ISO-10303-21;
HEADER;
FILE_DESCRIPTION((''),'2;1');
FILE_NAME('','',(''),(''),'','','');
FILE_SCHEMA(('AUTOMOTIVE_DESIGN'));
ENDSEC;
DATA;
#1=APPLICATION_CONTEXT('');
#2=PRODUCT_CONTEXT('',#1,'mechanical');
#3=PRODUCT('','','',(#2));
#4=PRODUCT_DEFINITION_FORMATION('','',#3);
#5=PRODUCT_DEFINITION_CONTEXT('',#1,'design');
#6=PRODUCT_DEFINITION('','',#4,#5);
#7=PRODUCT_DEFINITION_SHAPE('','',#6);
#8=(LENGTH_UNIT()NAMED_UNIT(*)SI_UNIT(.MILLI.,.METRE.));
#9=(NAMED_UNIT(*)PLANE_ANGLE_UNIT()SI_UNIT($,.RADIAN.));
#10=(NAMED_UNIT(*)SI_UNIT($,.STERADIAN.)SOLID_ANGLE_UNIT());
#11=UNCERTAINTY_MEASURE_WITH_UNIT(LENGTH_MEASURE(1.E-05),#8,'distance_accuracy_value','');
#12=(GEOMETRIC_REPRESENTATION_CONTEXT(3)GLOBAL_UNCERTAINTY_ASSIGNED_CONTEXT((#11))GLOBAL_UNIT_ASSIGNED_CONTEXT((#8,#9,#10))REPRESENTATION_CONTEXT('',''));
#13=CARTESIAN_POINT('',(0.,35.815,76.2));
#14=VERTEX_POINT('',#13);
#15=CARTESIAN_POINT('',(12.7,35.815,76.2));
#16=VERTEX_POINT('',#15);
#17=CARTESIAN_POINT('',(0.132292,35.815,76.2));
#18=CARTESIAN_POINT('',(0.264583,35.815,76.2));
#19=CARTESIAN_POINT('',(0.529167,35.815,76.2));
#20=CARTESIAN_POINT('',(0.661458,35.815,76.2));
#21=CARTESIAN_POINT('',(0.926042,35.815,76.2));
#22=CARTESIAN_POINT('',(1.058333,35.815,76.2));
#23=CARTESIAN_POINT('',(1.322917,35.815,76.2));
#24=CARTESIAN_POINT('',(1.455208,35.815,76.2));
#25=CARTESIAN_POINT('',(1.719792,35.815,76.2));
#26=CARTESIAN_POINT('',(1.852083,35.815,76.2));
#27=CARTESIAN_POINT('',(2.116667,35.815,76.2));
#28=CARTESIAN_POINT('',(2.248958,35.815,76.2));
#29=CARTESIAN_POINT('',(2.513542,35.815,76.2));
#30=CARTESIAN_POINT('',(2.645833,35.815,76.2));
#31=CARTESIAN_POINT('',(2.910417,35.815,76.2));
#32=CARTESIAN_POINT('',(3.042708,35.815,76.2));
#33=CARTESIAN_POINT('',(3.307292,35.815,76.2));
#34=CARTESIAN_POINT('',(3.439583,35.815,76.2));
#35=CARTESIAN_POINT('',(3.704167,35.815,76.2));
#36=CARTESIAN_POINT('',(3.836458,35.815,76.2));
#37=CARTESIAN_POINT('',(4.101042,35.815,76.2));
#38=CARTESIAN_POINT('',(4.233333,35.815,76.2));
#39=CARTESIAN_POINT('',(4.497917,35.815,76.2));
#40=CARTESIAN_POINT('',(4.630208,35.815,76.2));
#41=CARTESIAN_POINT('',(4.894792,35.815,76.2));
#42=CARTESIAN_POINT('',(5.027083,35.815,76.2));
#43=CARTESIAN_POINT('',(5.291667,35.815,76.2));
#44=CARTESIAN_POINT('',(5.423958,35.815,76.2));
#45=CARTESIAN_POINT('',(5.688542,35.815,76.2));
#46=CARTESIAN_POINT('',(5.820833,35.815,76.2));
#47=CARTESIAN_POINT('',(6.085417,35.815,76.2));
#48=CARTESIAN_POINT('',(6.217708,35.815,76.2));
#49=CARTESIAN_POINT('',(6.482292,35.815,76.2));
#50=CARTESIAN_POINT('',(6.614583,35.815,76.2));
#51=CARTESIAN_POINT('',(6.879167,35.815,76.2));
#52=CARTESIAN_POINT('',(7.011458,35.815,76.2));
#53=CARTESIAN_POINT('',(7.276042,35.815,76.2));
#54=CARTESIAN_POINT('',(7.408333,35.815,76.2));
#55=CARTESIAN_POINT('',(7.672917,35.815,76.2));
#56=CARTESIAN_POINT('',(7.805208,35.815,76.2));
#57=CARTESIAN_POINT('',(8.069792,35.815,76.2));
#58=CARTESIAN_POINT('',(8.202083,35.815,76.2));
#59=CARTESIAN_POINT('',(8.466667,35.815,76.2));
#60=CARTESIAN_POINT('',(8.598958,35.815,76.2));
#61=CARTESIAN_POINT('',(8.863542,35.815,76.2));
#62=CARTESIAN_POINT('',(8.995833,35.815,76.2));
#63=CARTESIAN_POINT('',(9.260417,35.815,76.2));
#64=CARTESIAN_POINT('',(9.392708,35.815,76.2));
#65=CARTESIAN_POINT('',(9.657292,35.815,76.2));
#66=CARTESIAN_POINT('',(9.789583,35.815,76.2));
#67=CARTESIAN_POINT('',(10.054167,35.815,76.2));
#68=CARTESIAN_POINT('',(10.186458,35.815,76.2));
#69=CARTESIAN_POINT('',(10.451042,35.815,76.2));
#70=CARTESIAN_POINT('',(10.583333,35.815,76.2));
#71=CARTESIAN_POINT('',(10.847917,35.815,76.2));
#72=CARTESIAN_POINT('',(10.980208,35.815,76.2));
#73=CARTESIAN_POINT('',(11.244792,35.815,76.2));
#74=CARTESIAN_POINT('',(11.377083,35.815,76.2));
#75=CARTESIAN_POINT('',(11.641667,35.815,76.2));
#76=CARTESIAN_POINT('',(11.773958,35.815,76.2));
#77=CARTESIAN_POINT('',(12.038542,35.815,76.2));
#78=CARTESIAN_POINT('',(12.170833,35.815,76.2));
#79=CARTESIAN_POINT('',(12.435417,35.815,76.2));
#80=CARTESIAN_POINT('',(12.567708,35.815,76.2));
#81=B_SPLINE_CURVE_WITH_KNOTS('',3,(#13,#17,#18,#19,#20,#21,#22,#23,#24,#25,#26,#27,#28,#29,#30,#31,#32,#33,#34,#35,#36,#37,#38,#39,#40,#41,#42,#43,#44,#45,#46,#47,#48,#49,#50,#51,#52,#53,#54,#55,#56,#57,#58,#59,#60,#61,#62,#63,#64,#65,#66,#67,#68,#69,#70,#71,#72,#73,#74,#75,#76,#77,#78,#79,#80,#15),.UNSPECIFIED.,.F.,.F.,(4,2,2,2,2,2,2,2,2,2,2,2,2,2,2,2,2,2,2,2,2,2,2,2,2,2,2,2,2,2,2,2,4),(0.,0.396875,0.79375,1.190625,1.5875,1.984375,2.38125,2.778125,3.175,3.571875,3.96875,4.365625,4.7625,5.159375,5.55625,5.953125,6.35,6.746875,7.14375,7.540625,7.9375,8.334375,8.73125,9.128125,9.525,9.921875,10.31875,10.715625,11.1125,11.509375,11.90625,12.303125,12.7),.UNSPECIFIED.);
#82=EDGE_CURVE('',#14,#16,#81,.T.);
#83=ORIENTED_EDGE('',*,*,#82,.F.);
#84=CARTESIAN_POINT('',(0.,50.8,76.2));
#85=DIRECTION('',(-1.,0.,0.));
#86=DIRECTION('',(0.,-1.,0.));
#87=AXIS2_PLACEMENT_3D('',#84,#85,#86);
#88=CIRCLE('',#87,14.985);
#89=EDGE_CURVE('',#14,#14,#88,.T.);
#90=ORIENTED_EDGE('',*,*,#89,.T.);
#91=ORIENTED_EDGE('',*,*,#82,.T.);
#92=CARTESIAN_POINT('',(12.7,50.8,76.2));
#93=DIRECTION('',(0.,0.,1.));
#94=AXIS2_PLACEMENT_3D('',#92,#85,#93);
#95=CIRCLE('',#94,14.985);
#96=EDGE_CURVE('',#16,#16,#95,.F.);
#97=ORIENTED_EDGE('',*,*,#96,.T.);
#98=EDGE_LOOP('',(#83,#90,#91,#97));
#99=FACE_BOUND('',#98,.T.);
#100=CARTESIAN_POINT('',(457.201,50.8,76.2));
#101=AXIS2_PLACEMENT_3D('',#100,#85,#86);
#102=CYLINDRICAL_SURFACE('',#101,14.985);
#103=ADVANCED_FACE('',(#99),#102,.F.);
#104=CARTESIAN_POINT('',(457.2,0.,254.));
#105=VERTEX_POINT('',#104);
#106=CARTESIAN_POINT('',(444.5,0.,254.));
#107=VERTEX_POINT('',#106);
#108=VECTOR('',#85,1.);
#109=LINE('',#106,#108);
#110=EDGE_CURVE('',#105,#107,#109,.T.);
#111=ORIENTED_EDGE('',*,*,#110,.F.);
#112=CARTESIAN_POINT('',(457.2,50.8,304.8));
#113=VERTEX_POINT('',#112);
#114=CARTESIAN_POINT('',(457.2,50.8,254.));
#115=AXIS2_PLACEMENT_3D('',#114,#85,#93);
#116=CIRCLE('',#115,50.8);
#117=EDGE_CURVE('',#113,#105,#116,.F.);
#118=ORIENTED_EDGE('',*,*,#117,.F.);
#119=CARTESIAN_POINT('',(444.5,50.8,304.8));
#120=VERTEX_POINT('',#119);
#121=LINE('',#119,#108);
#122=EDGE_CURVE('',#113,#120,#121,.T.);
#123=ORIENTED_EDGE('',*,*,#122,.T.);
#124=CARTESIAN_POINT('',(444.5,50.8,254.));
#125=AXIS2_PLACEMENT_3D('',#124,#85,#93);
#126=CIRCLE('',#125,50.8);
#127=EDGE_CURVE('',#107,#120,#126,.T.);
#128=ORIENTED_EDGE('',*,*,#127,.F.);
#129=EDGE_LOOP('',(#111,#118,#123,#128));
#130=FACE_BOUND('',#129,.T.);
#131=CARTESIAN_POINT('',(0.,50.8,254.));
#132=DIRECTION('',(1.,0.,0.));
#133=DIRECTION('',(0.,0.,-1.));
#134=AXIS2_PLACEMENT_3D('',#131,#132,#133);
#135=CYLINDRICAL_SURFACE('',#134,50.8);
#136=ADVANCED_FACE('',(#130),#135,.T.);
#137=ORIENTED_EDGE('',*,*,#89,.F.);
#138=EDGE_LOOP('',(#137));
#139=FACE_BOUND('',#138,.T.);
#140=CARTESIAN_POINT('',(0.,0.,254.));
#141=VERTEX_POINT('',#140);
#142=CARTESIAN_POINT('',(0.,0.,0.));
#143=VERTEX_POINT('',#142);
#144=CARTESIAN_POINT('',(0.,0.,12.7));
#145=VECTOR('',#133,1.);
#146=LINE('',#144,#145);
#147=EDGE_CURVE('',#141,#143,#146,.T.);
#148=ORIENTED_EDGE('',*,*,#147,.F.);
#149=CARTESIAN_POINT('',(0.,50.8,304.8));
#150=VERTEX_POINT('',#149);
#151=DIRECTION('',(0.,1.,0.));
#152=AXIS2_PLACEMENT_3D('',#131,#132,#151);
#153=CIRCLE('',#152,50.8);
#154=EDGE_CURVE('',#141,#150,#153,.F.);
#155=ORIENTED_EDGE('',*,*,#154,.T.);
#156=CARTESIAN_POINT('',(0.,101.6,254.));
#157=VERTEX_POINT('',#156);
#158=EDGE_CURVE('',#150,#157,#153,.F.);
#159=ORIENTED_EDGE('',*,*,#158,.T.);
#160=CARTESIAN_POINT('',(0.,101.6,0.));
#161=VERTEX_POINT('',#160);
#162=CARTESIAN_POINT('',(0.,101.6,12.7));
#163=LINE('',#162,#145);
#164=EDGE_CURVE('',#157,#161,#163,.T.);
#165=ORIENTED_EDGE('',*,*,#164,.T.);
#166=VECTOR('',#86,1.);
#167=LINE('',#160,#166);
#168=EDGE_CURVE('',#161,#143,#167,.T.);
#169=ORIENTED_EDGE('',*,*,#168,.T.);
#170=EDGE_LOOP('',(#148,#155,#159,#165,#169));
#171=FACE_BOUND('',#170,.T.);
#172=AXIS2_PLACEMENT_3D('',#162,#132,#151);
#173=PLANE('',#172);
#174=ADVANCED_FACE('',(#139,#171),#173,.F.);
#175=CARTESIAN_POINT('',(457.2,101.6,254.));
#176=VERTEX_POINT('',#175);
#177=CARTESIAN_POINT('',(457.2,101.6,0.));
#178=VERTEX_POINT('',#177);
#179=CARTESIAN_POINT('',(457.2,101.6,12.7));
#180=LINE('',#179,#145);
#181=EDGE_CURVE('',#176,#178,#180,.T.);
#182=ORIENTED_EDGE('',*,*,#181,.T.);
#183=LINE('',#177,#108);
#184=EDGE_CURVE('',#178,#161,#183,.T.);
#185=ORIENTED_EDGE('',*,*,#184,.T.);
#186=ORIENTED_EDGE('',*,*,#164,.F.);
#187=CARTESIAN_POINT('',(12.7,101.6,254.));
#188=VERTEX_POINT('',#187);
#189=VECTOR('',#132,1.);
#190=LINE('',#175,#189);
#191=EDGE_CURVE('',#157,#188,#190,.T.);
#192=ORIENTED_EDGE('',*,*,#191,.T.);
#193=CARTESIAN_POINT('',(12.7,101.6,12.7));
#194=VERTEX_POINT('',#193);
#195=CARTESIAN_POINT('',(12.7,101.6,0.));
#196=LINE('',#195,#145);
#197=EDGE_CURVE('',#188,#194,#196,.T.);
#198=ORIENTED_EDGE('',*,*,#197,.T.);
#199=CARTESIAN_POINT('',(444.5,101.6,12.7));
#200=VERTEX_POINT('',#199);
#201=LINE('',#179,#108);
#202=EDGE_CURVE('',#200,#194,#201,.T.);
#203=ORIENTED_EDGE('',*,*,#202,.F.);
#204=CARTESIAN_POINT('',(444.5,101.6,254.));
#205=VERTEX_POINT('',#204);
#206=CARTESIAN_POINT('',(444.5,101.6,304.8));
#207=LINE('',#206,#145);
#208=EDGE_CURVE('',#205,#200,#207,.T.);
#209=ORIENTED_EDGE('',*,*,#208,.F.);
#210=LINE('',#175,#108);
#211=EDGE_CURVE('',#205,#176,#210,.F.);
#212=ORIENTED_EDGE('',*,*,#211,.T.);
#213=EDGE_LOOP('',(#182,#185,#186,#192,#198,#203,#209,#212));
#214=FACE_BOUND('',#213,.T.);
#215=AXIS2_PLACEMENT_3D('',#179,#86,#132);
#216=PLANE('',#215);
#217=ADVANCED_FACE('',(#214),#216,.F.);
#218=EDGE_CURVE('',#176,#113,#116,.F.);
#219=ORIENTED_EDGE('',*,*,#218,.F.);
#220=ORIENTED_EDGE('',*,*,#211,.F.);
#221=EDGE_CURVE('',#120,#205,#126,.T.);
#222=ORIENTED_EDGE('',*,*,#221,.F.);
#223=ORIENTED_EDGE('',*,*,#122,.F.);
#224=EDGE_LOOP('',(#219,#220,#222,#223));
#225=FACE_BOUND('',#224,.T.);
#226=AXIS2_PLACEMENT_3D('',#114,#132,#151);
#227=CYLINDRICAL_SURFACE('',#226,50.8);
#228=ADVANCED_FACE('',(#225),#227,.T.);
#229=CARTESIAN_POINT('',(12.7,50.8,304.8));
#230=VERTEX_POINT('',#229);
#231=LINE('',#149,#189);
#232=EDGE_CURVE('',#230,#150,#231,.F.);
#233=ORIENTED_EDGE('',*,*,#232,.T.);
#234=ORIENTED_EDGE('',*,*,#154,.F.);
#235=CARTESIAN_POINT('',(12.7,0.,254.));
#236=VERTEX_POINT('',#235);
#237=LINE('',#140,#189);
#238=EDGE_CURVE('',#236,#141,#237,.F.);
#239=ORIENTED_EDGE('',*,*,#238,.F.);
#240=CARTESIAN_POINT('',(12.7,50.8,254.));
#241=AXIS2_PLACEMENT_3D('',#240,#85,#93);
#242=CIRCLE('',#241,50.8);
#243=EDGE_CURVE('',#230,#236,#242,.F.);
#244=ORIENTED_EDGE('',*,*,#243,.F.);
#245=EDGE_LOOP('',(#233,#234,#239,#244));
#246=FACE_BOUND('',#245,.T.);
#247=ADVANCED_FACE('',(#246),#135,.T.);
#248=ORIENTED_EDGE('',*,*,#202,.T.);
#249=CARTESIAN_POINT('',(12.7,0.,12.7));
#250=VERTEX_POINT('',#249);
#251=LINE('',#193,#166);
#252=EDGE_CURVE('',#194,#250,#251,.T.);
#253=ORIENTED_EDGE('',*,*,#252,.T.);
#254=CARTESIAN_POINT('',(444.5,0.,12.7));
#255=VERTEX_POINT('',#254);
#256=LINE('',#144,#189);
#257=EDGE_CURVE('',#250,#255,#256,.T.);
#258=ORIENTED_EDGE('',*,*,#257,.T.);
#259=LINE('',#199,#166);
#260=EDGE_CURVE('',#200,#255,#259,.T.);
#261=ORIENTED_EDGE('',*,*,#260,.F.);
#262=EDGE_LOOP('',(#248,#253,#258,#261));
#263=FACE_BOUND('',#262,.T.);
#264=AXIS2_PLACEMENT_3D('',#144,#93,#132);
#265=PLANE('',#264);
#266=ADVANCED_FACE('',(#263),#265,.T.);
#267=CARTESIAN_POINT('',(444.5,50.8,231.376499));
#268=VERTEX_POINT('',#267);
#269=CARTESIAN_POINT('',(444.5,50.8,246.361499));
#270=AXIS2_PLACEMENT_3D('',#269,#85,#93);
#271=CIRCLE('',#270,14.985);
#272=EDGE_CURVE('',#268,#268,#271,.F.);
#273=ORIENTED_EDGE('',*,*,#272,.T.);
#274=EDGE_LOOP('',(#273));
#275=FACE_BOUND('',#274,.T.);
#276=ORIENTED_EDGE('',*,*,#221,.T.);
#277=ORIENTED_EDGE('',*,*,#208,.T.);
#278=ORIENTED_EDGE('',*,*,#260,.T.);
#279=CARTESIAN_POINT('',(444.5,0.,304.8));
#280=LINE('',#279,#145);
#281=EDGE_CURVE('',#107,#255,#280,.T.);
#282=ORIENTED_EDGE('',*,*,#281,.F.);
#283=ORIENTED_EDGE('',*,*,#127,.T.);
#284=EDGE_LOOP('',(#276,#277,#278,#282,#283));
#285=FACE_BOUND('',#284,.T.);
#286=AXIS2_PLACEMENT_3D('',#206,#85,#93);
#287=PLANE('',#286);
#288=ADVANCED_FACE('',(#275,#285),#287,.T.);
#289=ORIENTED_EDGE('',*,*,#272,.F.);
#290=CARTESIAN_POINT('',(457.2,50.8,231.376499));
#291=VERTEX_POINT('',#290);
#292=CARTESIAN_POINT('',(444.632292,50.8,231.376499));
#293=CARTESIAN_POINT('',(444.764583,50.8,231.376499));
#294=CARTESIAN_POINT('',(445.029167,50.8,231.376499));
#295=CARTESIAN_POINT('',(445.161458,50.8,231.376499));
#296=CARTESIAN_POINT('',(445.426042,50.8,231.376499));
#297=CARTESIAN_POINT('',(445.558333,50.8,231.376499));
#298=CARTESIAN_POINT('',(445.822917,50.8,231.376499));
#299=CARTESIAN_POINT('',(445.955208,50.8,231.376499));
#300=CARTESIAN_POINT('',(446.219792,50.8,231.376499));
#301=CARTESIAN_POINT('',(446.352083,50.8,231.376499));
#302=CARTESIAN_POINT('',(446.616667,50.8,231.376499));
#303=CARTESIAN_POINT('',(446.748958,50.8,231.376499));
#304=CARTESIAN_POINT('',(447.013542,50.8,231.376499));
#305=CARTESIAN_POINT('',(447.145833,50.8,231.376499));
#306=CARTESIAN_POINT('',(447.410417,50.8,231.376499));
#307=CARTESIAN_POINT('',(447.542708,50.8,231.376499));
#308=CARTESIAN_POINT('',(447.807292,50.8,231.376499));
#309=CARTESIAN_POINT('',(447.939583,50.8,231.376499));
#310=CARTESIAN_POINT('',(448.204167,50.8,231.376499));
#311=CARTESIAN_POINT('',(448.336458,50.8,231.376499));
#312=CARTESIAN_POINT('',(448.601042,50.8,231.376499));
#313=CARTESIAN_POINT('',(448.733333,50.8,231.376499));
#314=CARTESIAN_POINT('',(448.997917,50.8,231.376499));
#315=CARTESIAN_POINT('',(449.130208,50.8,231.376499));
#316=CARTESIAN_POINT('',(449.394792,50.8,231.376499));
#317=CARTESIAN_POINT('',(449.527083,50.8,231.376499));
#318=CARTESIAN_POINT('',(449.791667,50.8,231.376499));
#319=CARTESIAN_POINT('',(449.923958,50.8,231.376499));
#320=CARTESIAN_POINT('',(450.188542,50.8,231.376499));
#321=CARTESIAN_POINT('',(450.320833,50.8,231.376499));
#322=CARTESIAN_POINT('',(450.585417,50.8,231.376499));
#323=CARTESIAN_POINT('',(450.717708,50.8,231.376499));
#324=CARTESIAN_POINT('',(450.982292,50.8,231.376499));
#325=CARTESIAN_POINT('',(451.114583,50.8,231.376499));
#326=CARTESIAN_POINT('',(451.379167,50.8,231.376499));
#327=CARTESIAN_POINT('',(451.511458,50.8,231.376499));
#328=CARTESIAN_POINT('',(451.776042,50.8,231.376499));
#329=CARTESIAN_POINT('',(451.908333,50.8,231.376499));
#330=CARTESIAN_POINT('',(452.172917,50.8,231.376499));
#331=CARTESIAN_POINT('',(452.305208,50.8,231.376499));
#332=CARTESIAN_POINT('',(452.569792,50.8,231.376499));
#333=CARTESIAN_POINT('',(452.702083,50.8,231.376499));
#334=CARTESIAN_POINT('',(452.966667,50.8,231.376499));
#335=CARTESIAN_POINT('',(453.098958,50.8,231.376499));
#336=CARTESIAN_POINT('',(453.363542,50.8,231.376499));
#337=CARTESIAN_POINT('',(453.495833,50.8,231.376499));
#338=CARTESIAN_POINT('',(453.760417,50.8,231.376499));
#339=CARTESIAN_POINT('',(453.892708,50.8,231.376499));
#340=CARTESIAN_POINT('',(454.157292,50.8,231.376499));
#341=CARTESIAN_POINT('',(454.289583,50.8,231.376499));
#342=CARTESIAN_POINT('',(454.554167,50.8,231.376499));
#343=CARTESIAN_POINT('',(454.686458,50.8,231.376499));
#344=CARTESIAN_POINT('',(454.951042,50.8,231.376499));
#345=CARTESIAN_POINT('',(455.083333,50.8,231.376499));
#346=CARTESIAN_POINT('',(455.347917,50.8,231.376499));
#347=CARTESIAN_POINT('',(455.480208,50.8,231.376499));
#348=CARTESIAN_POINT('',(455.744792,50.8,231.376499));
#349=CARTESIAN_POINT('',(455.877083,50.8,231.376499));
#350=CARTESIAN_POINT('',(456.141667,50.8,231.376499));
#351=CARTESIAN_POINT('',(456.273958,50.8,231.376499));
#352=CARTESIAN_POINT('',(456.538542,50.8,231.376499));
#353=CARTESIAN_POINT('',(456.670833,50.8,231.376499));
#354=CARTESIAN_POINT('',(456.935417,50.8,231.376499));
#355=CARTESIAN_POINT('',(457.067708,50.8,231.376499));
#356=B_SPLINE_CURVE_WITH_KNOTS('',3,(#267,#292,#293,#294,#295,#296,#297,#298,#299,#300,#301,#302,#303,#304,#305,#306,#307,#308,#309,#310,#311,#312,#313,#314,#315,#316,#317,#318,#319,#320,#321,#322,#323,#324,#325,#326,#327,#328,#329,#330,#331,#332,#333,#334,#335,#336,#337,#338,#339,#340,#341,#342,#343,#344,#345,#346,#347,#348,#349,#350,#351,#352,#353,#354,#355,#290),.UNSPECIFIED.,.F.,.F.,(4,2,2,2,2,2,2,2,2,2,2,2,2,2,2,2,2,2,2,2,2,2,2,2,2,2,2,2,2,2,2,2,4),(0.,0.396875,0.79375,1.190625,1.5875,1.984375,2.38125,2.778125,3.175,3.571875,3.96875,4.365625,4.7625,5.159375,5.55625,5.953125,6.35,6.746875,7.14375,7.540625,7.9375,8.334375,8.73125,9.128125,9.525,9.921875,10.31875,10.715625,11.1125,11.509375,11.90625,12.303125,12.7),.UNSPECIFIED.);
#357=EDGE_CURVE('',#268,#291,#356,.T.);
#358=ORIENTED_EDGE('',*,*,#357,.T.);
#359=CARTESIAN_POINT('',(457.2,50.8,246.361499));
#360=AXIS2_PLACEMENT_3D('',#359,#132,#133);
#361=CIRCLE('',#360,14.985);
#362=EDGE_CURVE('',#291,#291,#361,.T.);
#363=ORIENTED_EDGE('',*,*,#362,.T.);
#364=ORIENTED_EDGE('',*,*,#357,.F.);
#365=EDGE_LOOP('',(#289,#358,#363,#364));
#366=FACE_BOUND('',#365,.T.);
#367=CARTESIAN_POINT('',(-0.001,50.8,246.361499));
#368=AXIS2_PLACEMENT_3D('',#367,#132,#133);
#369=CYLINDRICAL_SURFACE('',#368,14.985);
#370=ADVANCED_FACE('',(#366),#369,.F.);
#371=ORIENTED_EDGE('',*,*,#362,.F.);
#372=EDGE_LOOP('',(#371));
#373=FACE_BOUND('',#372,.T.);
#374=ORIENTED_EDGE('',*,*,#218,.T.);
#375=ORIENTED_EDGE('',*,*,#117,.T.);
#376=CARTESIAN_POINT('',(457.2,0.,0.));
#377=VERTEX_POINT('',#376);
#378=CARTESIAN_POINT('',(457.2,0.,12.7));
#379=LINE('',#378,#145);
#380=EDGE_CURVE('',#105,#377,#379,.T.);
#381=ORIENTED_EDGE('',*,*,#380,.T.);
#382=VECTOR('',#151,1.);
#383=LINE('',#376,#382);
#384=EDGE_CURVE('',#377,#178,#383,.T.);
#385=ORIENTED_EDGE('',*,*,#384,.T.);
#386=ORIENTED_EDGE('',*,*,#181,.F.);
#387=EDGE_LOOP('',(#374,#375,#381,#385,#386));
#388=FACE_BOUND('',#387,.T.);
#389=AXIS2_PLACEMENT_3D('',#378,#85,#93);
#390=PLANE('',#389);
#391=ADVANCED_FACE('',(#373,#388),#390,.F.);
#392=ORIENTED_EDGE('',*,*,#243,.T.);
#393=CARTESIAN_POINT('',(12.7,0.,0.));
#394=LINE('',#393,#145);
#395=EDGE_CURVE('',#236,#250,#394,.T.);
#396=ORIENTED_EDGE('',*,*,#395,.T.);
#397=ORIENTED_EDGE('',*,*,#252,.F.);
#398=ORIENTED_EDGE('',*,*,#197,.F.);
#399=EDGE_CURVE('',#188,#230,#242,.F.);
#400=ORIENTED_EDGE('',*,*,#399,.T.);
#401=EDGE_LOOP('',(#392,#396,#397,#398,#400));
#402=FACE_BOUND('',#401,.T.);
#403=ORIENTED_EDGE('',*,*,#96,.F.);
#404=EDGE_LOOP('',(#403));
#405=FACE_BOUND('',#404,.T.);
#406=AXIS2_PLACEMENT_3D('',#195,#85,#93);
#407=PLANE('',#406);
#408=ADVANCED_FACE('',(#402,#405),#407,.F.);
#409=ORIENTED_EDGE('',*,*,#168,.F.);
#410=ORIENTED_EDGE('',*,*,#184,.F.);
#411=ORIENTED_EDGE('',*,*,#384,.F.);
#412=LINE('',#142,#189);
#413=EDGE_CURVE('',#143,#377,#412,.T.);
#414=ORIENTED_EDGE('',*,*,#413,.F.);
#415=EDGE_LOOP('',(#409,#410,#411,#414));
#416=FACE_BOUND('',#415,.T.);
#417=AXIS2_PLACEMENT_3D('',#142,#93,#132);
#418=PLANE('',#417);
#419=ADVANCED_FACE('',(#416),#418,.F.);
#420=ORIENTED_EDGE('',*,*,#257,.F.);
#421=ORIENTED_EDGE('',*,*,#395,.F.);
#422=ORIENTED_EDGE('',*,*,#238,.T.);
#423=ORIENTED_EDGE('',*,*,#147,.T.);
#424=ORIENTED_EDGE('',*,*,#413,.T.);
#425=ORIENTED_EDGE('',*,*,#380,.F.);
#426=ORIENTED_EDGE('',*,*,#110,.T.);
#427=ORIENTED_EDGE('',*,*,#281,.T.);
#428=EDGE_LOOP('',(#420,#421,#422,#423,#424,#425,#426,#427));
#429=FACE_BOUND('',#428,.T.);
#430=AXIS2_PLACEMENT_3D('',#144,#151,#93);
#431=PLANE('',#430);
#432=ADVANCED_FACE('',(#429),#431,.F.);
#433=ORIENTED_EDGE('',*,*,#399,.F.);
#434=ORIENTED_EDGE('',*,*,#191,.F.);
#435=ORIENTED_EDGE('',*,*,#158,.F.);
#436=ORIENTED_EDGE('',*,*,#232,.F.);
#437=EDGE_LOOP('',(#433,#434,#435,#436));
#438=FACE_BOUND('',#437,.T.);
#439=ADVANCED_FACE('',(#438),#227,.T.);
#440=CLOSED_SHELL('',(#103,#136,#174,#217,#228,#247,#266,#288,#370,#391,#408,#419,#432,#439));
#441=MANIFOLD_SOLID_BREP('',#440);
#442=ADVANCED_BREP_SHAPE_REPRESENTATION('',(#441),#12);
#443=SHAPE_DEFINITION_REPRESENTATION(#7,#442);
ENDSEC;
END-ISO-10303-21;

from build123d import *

# Parameters (mm, degrees)
SKETCH1_W           = 457.2
SKETCH1_H           = 101.6
BASE_FLANGE1_DEPTH  = 12.7
SKETCH6_W           = 12.7
SKETCH6_H           = 292.1
BOSS_EXTRUDE1_DEPTH = 101.6
SKETCH9_W           = 12.7
SKETCH9_H           = 292.1
BOSS_EXTRUDE2_DEPTH = 101.6
CUT_EXTRUDE1_REACH  = 560.8
SKETCH12_R          = 14.985
FILLET1_R           = 50.8
FILLET2_R           = 50.8
CUT_EXTRUDE2_REACH  = 560.8
SKETCH13_R          = 14.985


# Sheet-metal steps are written as plain solids
with BuildPart() as part:
    # Sketch1 → Base-Flange1 (new body)
    with BuildSketch(Plane.XY):
        with Locations((228.6, 50.8)):
            Rectangle(SKETCH1_W, SKETCH1_H)
    extrude(amount=BASE_FLANGE1_DEPTH)

    # Sketch6 → Boss-Extrude1 (add, through all)
    with BuildSketch(Plane.XZ):
        with Locations((6.35, 158.75)):
            Rectangle(SKETCH6_W, SKETCH6_H)
    extrude(amount=-BOSS_EXTRUDE1_DEPTH)

    # Sketch9 → Boss-Extrude2 (add, through all)
    with BuildSketch(Plane.XZ):
        with Locations((450.85, 158.75)):
            Rectangle(SKETCH9_W, SKETCH9_H)
    extrude(amount=-BOSS_EXTRUDE2_DEPTH)

    # Sketch12 → Cut-Extrude1 (cut, up to next)
    with BuildSketch(Plane(origin=(457.2, 0, 0), x_dir=(0, 0, -1), z_dir=(1, 0, 0)), mode=Mode.PRIVATE) as cut_extrude1_sk1:
        with Locations((-246.361498901, 50.8)):
            Circle(SKETCH12_R)
    cut_extrude1_tool1 = extrude(cut_extrude1_sk1.sketch, amount=-CUT_EXTRUDE1_REACH, mode=Mode.PRIVATE) & part.part
    add(cut_extrude1_tool1.solids().sort_by_distance((457.2, 50.8, 246.361499))[0], mode=Mode.SUBTRACT)

    # Fillet1
    fillet1_edges = [part.edges().sort_by_distance(p)[0] for p in [
        (450.85, 0, 304.8),
        (450.85, 101.6, 304.8),
    ]]
    fillet(fillet1_edges, radius=FILLET1_R - 0.0001)  # a hair under: the kernel refuses the full size

    # Fillet2
    fillet2_edges = [part.edges().sort_by_distance(p)[0] for p in [
        (6.35, 0, 304.8),
        (6.35, 101.6, 304.8),
    ]]
    fillet(fillet2_edges, radius=FILLET2_R - 0.0001)  # a hair under: the kernel refuses the full size

    # Sketch13 → Cut-Extrude2 (cut, up to next)
    with BuildSketch(Plane.ZY, mode=Mode.PRIVATE) as cut_extrude2_sk1:
        with Locations(Location((76.2, 50.8, 0), (0, 0, 270))):
            Circle(SKETCH13_R)
    cut_extrude2_tool1 = extrude(cut_extrude2_sk1.sketch, amount=-CUT_EXTRUDE2_REACH, mode=Mode.PRIVATE) & part.part
    add(cut_extrude2_tool1.solids().sort_by_distance((0, 50.8, 76.2))[0], mode=Mode.SUBTRACT)


solid = part.part
